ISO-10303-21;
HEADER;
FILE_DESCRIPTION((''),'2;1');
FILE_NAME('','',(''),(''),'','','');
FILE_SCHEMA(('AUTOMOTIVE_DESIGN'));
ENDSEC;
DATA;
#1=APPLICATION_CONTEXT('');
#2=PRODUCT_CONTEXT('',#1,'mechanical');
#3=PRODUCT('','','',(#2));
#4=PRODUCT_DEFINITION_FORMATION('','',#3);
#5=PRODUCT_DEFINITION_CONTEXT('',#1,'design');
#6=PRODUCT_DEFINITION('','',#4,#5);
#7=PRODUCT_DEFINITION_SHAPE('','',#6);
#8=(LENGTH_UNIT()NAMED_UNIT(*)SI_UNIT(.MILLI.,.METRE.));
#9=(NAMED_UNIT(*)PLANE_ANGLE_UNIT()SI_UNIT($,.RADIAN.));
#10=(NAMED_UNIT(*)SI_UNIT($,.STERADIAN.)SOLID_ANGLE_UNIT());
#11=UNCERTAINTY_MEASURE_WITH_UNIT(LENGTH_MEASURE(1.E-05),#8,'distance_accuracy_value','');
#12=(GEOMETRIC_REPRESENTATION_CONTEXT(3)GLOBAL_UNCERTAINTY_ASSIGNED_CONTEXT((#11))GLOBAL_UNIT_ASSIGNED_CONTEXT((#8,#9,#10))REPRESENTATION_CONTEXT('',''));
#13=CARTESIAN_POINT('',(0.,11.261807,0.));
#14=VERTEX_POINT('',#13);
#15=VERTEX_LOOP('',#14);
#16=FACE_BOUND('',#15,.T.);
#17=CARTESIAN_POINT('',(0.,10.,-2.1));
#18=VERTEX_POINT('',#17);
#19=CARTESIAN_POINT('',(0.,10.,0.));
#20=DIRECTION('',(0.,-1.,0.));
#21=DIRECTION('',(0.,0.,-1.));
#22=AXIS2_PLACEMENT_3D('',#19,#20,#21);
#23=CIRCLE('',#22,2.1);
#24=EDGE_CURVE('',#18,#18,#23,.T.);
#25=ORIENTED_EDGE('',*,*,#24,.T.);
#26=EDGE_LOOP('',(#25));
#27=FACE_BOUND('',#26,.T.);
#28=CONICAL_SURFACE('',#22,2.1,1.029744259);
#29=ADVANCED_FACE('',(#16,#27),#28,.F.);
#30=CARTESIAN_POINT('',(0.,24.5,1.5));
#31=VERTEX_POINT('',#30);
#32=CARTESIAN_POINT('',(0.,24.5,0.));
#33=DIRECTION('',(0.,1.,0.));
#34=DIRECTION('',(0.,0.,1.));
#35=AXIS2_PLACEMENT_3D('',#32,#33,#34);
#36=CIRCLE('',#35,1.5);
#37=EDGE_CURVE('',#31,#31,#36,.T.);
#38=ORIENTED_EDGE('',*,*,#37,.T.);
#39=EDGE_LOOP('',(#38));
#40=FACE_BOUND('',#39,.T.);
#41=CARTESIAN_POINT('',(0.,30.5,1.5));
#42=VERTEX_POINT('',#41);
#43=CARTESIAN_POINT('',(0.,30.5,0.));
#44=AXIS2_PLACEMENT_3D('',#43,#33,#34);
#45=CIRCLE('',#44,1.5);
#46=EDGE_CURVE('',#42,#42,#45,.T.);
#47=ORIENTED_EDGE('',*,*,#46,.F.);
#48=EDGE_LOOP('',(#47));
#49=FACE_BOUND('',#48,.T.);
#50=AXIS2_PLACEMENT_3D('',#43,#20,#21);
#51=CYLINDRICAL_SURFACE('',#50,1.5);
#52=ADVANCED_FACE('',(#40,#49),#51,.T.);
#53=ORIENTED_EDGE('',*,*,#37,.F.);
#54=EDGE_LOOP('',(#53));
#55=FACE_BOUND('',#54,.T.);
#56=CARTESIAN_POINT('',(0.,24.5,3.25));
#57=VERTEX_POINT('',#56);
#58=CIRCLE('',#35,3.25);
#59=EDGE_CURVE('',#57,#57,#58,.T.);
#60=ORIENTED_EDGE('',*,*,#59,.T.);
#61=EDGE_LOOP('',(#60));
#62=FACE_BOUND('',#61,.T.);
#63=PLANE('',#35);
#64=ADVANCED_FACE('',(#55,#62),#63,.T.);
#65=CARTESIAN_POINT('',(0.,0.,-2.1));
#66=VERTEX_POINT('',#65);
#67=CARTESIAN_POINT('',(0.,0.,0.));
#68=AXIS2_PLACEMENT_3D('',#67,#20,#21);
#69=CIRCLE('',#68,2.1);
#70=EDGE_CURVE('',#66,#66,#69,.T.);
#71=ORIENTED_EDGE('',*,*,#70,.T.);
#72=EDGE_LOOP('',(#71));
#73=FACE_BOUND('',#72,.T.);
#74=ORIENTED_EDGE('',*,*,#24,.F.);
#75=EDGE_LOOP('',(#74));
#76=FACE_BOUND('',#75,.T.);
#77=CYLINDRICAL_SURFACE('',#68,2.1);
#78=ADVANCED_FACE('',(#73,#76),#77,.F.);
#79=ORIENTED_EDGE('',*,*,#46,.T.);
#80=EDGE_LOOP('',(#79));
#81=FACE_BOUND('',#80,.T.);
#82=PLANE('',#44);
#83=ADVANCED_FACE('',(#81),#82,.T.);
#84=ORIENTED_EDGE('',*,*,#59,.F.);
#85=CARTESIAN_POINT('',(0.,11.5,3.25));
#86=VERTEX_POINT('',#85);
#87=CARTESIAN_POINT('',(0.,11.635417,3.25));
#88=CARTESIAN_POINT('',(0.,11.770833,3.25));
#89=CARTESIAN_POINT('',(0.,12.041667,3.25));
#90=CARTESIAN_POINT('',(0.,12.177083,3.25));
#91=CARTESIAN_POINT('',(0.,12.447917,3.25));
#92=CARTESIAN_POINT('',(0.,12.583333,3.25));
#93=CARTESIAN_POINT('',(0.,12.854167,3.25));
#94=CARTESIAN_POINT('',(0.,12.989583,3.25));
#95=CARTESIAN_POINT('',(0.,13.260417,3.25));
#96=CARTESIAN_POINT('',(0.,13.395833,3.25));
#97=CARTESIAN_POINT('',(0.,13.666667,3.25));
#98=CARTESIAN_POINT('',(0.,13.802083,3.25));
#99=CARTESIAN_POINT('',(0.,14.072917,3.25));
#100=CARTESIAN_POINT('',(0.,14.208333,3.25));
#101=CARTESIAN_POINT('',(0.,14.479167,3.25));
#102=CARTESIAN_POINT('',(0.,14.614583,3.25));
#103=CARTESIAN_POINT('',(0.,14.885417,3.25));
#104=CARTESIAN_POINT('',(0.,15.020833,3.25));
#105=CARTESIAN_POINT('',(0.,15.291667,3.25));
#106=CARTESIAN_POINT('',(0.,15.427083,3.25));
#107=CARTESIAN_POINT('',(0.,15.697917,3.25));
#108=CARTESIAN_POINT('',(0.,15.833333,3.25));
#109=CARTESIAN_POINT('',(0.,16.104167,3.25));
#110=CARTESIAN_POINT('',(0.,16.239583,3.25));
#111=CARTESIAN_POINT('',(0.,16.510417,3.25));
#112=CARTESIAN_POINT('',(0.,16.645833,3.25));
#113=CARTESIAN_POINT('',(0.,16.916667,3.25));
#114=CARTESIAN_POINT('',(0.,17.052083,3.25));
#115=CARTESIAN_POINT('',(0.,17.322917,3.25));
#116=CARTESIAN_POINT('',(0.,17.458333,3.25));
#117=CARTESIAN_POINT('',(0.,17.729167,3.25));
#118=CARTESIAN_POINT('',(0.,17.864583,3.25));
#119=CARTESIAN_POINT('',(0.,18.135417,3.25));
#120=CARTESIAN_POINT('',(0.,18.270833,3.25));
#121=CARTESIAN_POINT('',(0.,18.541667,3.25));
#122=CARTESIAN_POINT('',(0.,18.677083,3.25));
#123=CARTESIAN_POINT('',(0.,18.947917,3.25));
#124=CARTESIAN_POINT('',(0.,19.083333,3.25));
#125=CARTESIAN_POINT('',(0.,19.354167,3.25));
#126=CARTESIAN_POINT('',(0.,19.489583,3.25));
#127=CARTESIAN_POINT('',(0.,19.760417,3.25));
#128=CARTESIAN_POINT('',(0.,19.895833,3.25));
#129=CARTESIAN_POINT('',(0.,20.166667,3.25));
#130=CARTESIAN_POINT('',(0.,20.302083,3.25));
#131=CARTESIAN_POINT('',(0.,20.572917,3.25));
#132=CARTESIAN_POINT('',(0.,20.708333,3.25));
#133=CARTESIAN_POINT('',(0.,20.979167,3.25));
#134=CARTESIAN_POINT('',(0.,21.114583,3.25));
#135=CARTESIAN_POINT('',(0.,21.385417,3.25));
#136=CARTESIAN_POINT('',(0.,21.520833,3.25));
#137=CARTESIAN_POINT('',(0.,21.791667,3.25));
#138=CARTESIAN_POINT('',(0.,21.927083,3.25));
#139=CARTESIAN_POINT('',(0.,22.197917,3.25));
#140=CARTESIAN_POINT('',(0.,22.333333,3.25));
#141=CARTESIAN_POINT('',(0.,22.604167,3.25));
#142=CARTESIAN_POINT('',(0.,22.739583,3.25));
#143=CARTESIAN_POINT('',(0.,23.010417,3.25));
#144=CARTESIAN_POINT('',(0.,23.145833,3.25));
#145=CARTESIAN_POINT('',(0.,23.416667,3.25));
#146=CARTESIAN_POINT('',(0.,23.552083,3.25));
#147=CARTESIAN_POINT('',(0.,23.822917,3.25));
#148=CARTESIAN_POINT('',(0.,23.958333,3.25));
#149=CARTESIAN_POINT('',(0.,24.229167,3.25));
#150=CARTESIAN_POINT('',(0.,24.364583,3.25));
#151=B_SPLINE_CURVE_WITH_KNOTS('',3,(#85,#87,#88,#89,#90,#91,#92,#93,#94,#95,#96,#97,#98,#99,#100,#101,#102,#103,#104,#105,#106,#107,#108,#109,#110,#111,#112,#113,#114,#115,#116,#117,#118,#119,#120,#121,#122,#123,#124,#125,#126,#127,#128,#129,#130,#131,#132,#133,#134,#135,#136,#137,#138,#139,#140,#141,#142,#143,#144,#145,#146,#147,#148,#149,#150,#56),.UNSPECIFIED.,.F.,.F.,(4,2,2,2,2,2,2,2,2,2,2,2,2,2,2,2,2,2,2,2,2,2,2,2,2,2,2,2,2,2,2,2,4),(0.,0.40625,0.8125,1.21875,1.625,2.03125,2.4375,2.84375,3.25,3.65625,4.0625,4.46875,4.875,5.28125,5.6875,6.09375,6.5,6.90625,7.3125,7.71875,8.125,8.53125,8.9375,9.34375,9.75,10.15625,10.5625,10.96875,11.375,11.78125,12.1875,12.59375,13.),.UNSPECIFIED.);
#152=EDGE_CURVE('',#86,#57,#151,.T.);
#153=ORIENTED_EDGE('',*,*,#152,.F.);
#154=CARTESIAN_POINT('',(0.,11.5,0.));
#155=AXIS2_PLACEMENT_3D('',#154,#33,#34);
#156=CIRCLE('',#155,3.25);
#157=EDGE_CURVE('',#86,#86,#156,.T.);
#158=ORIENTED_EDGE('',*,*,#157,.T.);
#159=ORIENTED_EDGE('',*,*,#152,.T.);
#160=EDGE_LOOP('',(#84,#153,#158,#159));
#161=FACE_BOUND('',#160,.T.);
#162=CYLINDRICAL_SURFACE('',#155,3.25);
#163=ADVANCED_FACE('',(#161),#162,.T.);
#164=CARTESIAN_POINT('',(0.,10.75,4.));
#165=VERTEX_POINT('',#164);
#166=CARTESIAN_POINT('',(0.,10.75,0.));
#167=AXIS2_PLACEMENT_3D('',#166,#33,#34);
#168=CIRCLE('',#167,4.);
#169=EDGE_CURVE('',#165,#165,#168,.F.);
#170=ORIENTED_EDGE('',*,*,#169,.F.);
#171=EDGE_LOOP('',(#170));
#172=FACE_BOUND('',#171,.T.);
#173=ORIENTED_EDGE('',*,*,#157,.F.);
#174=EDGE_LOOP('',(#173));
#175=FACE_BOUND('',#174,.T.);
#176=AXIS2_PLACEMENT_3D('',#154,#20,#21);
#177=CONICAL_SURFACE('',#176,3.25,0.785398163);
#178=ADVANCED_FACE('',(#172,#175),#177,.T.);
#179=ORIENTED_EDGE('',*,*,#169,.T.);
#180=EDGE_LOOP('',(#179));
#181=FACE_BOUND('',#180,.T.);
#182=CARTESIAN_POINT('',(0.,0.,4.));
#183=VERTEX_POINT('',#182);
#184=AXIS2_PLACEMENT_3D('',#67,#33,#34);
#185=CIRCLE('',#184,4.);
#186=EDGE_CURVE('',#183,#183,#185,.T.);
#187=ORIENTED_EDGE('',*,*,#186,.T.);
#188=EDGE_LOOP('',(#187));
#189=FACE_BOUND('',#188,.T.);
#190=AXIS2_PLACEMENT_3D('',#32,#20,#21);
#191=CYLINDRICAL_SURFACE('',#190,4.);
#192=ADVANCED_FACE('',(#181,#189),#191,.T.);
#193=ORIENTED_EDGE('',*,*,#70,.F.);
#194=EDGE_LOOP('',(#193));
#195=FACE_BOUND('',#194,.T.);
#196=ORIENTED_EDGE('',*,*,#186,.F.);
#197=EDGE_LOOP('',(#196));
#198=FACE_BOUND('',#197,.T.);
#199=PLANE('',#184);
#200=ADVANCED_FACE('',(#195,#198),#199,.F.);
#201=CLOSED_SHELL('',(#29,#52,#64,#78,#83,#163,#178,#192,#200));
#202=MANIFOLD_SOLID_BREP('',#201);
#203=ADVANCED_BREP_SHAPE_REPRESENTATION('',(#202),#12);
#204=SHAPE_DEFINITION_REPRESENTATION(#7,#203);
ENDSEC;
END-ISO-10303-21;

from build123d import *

# Parameters (mm, degrees)
SKETCH_1_R             = 4
EXTRUDE_1_DEPTH        = 24.5
SKETCH_2_R             = 1.5
EXTRUDE_2_DEPTH        = 6
HOLE_WIZARD_M5_1_D     = 4.2
HOLE_WIZARD_M5_1_DEPTH = 10
HOLE_WIZARD_M5_1_TIP   = 1.2618073
SKETCH_5_OUTSIDE_W     = 16.506
SKETCH_5_OUTSIDE_H     = 16.506
SKETCH_5_OUTSIDE_R     = 3.25
CUT_EXTRUDE_1_DEPTH    = 13
CHAMFER_1_SIZE         = 0.75


with BuildPart() as part:
    # 草图1 → 凸台-拉伸1 (new body)
    with BuildSketch(Plane(origin=(0, 0, 0), x_dir=(1, 0, 0), z_dir=(0, 1, 0))):
        with Locations(Location((0, 0, 0), (0, 0, 270))):
            Circle(SKETCH_1_R)
    extrude(amount=EXTRUDE_1_DEPTH)

    # 草图2 → 凸台-拉伸2 (add)
    with BuildSketch(Plane(origin=(0, 24.5, 0), x_dir=(1, 0, 0), z_dir=(0, 1, 0))):
        with Locations(Location((0, 0, 0), (0, 0, 270))):
            Circle(SKETCH_2_R)
    extrude(amount=EXTRUDE_2_DEPTH)

    # M5 螺纹孔1
    with Locations(Plane(origin=(0, 0, 0), x_dir=(-1, 0, 0), z_dir=(0, -1, 0))):
        with Locations((0, 0)):
            Hole(HOLE_WIZARD_M5_1_D / 2, depth=HOLE_WIZARD_M5_1_DEPTH)
            with Locations((0, 0, -(HOLE_WIZARD_M5_1_DEPTH + HOLE_WIZARD_M5_1_TIP / 2))):  # 118° drill point
                Cone(0, HOLE_WIZARD_M5_1_D / 2, HOLE_WIZARD_M5_1_TIP, mode=Mode.SUBTRACT)

    # 草图5 outside → 切除-拉伸1 (cut)
    with BuildSketch(Plane(origin=(0, 24.5, 0), x_dir=(1, 0, 0), z_dir=(0, 1, 0))):
        Rectangle(SKETCH_5_OUTSIDE_W, SKETCH_5_OUTSIDE_H)
        with Locations(Location((0, 0, 0), (0, 0, 270))):
            Circle(SKETCH_5_OUTSIDE_R, mode=Mode.SUBTRACT)
    extrude(amount=-CUT_EXTRUDE_1_DEPTH, mode=Mode.SUBTRACT)

    # 倒角1
    chamfer_1_edges = [part.edges().sort_by_distance(p)[0] for p in [
        (0, 11.5, -4),
    ]]
    chamfer(chamfer_1_edges, length=CHAMFER_1_SIZE - 0.0001)  # a hair under: the kernel refuses the full size


solid = part.part
